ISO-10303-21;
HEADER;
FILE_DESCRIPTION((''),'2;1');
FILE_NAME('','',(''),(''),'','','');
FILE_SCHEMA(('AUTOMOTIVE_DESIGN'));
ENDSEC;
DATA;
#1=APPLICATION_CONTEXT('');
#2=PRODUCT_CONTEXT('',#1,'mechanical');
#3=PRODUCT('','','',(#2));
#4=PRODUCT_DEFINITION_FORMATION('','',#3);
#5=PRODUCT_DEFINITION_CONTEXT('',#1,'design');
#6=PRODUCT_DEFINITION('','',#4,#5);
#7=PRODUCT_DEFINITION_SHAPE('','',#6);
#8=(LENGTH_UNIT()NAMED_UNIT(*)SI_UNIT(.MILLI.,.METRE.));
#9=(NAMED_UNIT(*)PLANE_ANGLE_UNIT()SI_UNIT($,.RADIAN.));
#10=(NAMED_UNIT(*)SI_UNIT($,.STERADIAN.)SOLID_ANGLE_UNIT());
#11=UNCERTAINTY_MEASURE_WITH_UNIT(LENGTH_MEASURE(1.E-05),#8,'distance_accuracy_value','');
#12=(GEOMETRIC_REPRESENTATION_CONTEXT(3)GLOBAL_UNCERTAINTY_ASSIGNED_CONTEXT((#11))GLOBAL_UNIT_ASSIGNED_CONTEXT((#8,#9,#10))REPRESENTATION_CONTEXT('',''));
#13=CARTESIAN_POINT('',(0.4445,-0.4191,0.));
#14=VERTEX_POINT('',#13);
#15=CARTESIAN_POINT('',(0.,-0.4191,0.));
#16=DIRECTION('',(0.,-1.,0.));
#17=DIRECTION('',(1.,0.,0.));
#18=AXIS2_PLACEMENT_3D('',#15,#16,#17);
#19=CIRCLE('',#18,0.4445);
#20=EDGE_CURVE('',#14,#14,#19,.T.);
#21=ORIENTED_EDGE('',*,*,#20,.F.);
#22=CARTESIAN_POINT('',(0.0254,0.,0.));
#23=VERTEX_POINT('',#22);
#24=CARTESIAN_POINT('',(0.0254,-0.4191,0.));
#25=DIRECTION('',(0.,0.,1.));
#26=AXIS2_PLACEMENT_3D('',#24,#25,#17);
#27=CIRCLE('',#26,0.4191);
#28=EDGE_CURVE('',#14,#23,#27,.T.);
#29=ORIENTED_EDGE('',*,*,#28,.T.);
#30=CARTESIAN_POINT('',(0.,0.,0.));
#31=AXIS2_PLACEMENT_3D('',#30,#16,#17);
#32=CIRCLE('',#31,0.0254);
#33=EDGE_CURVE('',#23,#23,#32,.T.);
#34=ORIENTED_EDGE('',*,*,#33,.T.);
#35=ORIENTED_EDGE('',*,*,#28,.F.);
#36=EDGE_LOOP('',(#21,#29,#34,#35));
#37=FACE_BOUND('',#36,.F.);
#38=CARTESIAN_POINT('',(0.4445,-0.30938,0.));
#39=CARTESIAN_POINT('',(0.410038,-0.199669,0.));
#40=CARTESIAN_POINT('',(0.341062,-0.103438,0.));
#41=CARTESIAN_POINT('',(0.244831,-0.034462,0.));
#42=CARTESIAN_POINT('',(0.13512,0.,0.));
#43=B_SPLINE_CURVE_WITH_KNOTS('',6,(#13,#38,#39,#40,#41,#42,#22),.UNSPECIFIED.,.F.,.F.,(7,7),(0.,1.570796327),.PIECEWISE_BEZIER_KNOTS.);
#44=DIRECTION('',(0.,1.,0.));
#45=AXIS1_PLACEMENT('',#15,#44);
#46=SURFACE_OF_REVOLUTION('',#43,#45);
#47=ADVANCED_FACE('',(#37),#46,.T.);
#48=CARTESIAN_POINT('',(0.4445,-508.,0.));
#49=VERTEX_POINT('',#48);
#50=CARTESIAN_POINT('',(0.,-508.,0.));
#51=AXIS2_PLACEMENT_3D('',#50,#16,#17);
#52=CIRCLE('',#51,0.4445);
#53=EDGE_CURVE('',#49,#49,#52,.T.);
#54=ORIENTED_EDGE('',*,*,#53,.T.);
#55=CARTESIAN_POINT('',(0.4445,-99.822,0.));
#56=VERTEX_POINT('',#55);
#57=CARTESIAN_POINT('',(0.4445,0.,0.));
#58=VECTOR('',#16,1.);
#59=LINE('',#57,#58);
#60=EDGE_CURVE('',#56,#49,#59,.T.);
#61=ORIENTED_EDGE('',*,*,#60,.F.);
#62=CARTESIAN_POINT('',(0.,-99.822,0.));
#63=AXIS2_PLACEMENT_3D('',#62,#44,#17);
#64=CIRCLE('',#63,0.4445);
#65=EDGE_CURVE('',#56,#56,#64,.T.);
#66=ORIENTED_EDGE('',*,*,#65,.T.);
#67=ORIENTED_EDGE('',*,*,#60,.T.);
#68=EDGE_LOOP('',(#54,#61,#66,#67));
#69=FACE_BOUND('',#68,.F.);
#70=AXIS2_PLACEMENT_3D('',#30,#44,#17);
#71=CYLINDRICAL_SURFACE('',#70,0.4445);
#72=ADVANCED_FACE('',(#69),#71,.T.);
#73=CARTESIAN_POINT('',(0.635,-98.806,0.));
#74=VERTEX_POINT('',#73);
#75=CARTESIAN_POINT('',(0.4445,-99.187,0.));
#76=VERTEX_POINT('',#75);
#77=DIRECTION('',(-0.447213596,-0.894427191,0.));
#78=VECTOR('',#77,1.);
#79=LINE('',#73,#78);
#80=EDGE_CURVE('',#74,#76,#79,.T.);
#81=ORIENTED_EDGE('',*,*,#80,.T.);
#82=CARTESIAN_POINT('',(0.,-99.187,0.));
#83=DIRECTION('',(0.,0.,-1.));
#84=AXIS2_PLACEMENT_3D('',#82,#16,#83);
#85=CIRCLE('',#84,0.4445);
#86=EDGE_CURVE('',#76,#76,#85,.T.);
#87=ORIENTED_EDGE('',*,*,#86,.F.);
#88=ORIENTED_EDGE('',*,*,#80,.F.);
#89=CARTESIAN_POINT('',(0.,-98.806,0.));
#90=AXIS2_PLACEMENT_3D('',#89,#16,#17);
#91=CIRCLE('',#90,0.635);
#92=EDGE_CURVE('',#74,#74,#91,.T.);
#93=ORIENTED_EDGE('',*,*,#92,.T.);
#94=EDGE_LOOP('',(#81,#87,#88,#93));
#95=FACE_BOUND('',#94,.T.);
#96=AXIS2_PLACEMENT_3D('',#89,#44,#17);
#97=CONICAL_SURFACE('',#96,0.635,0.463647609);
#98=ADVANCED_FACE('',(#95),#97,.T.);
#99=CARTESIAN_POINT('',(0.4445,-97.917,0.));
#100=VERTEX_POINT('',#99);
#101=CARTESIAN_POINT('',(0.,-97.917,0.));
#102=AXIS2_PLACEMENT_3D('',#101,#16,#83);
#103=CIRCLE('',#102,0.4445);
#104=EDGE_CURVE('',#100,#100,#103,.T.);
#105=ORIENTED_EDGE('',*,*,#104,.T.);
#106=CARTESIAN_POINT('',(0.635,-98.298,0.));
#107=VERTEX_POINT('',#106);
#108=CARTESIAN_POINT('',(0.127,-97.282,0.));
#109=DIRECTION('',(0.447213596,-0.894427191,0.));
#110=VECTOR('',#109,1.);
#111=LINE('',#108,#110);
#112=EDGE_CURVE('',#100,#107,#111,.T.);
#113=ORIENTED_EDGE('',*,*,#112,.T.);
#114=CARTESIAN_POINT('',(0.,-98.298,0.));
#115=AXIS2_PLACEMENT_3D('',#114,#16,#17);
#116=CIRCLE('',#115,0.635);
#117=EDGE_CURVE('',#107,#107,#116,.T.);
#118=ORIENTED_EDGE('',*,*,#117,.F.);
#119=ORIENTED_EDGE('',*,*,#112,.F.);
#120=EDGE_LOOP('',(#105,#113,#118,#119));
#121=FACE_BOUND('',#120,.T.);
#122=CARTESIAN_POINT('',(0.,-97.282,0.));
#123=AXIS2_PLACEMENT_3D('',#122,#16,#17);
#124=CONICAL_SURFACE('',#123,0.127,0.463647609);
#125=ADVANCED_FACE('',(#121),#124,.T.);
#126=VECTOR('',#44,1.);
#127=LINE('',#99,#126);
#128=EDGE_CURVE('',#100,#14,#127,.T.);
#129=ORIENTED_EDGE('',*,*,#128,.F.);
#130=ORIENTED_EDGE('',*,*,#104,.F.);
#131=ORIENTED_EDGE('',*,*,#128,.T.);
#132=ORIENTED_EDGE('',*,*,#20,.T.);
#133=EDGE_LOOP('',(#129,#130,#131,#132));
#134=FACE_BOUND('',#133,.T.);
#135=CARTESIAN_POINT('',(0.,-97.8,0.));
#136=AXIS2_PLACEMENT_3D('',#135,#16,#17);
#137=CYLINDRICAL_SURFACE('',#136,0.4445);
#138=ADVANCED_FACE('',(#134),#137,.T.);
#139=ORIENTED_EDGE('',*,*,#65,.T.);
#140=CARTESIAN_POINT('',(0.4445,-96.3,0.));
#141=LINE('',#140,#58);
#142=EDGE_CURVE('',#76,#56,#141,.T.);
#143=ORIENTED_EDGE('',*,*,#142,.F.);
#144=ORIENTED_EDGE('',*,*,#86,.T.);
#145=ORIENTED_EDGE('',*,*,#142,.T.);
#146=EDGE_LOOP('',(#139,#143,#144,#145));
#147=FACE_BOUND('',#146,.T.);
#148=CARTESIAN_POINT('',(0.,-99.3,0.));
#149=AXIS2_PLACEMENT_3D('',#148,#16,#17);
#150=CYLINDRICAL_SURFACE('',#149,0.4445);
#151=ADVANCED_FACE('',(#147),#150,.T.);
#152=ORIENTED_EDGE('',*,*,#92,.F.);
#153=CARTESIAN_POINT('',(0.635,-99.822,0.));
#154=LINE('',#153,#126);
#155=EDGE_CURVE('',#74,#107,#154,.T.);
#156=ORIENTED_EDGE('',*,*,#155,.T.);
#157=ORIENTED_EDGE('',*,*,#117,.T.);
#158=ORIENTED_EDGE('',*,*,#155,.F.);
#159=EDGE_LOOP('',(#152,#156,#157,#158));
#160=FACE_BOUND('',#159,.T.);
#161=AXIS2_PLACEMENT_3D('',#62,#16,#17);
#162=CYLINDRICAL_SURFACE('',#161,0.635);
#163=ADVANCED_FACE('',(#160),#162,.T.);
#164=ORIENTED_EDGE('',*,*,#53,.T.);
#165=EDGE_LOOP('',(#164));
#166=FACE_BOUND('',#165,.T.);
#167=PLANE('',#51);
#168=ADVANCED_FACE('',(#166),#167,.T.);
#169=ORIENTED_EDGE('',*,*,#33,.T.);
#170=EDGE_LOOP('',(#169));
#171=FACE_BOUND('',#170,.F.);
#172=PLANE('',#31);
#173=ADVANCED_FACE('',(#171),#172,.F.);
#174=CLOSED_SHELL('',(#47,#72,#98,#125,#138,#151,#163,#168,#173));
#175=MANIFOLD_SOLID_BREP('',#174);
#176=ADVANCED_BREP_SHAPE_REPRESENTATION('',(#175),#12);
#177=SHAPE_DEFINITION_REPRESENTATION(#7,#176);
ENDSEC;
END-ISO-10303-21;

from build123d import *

# Parameters (mm, degrees)
F0_R        = 0.4445
F1_DEPTH    = 508
F3_R        = 0.635
F4_DEPTH    = 2.54
F5_S5_R     = 0.4445
F5_T6_DEPTH = 3
F6_S5_R     = 0.4445
F6_T6_DEPTH = 3
F7_R        = 0.4191


# Not quite as in the source:
# - a fillet or chamfer that OpenCascade refuses, or shapes differently, is made with other operations: its cross-section is extruded or revolved along the edge and cut away or added


with BuildPart() as f1:
    # F0 (on Front) → F1 (new body)
    with BuildSketch(Plane.XZ):
        Circle(F0_R)
    extrude(amount=F1_DEPTH)

    # F3 (on offset) → F4 (join)
    with BuildSketch(Plane.XZ.offset(99.822)):
        Circle(F3_R)
    extrude(amount=-F4_DEPTH)

    # F5: chamfer of 1.016 x 0.508 on 1 edges, made by hand


with BuildPart() as f5_tool2:
    # F5_s3 → F5_t4 (revolve)
    with BuildSketch(Plane.XY):
        Polygon((0.127, -97.282), (0.635, -98.298), (0.635, -97.282), align=None)
    revolve(axis=Axis((0, -97.282, 0), (0, -1, 0)))

    # F5_s5 → F5_t6 (cut, symmetric)
    with BuildSketch(Plane.XZ.offset(97.8)):
        Circle(F5_S5_R)
    extrude(amount=F5_T6_DEPTH, both=True, mode=Mode.SUBTRACT)


with BuildPart() as f1_1:
    add(f1.part)

    # F5_t1: cut F5_tool2
    add(f5_tool2.part, mode=Mode.SUBTRACT)

    # F6: chamfer of 0.508 x 1.016 on 1 edges, made by hand


with BuildPart() as f6_tool2:
    # F6_s3 → F6_t4 (revolve)
    with BuildSketch(Plane.XY):
        Polygon((0.635, -98.806), (0.127, -99.822), (0.635, -99.822), align=None)
    revolve(axis=Axis((0, -99.822, 0), (0, -1, 0)))

    # F6_s5 → F6_t6 (cut, symmetric)
    with BuildSketch(Plane.XZ.offset(99.3)):
        Circle(F6_S5_R)
    extrude(amount=F6_T6_DEPTH, both=True, mode=Mode.SUBTRACT)


with BuildPart() as f1_2:
    add(f1_1.part)

    # F6_t1: cut F6_tool2
    add(f6_tool2.part, mode=Mode.SUBTRACT)

    # F7
    f7_edges = [f1_2.edges().sort_by_distance(p)[0] for p in [
        (-0.4445, 0, 0),
    ]]
    fillet(f7_edges, radius=F7_R)


solid = f1_2.part
